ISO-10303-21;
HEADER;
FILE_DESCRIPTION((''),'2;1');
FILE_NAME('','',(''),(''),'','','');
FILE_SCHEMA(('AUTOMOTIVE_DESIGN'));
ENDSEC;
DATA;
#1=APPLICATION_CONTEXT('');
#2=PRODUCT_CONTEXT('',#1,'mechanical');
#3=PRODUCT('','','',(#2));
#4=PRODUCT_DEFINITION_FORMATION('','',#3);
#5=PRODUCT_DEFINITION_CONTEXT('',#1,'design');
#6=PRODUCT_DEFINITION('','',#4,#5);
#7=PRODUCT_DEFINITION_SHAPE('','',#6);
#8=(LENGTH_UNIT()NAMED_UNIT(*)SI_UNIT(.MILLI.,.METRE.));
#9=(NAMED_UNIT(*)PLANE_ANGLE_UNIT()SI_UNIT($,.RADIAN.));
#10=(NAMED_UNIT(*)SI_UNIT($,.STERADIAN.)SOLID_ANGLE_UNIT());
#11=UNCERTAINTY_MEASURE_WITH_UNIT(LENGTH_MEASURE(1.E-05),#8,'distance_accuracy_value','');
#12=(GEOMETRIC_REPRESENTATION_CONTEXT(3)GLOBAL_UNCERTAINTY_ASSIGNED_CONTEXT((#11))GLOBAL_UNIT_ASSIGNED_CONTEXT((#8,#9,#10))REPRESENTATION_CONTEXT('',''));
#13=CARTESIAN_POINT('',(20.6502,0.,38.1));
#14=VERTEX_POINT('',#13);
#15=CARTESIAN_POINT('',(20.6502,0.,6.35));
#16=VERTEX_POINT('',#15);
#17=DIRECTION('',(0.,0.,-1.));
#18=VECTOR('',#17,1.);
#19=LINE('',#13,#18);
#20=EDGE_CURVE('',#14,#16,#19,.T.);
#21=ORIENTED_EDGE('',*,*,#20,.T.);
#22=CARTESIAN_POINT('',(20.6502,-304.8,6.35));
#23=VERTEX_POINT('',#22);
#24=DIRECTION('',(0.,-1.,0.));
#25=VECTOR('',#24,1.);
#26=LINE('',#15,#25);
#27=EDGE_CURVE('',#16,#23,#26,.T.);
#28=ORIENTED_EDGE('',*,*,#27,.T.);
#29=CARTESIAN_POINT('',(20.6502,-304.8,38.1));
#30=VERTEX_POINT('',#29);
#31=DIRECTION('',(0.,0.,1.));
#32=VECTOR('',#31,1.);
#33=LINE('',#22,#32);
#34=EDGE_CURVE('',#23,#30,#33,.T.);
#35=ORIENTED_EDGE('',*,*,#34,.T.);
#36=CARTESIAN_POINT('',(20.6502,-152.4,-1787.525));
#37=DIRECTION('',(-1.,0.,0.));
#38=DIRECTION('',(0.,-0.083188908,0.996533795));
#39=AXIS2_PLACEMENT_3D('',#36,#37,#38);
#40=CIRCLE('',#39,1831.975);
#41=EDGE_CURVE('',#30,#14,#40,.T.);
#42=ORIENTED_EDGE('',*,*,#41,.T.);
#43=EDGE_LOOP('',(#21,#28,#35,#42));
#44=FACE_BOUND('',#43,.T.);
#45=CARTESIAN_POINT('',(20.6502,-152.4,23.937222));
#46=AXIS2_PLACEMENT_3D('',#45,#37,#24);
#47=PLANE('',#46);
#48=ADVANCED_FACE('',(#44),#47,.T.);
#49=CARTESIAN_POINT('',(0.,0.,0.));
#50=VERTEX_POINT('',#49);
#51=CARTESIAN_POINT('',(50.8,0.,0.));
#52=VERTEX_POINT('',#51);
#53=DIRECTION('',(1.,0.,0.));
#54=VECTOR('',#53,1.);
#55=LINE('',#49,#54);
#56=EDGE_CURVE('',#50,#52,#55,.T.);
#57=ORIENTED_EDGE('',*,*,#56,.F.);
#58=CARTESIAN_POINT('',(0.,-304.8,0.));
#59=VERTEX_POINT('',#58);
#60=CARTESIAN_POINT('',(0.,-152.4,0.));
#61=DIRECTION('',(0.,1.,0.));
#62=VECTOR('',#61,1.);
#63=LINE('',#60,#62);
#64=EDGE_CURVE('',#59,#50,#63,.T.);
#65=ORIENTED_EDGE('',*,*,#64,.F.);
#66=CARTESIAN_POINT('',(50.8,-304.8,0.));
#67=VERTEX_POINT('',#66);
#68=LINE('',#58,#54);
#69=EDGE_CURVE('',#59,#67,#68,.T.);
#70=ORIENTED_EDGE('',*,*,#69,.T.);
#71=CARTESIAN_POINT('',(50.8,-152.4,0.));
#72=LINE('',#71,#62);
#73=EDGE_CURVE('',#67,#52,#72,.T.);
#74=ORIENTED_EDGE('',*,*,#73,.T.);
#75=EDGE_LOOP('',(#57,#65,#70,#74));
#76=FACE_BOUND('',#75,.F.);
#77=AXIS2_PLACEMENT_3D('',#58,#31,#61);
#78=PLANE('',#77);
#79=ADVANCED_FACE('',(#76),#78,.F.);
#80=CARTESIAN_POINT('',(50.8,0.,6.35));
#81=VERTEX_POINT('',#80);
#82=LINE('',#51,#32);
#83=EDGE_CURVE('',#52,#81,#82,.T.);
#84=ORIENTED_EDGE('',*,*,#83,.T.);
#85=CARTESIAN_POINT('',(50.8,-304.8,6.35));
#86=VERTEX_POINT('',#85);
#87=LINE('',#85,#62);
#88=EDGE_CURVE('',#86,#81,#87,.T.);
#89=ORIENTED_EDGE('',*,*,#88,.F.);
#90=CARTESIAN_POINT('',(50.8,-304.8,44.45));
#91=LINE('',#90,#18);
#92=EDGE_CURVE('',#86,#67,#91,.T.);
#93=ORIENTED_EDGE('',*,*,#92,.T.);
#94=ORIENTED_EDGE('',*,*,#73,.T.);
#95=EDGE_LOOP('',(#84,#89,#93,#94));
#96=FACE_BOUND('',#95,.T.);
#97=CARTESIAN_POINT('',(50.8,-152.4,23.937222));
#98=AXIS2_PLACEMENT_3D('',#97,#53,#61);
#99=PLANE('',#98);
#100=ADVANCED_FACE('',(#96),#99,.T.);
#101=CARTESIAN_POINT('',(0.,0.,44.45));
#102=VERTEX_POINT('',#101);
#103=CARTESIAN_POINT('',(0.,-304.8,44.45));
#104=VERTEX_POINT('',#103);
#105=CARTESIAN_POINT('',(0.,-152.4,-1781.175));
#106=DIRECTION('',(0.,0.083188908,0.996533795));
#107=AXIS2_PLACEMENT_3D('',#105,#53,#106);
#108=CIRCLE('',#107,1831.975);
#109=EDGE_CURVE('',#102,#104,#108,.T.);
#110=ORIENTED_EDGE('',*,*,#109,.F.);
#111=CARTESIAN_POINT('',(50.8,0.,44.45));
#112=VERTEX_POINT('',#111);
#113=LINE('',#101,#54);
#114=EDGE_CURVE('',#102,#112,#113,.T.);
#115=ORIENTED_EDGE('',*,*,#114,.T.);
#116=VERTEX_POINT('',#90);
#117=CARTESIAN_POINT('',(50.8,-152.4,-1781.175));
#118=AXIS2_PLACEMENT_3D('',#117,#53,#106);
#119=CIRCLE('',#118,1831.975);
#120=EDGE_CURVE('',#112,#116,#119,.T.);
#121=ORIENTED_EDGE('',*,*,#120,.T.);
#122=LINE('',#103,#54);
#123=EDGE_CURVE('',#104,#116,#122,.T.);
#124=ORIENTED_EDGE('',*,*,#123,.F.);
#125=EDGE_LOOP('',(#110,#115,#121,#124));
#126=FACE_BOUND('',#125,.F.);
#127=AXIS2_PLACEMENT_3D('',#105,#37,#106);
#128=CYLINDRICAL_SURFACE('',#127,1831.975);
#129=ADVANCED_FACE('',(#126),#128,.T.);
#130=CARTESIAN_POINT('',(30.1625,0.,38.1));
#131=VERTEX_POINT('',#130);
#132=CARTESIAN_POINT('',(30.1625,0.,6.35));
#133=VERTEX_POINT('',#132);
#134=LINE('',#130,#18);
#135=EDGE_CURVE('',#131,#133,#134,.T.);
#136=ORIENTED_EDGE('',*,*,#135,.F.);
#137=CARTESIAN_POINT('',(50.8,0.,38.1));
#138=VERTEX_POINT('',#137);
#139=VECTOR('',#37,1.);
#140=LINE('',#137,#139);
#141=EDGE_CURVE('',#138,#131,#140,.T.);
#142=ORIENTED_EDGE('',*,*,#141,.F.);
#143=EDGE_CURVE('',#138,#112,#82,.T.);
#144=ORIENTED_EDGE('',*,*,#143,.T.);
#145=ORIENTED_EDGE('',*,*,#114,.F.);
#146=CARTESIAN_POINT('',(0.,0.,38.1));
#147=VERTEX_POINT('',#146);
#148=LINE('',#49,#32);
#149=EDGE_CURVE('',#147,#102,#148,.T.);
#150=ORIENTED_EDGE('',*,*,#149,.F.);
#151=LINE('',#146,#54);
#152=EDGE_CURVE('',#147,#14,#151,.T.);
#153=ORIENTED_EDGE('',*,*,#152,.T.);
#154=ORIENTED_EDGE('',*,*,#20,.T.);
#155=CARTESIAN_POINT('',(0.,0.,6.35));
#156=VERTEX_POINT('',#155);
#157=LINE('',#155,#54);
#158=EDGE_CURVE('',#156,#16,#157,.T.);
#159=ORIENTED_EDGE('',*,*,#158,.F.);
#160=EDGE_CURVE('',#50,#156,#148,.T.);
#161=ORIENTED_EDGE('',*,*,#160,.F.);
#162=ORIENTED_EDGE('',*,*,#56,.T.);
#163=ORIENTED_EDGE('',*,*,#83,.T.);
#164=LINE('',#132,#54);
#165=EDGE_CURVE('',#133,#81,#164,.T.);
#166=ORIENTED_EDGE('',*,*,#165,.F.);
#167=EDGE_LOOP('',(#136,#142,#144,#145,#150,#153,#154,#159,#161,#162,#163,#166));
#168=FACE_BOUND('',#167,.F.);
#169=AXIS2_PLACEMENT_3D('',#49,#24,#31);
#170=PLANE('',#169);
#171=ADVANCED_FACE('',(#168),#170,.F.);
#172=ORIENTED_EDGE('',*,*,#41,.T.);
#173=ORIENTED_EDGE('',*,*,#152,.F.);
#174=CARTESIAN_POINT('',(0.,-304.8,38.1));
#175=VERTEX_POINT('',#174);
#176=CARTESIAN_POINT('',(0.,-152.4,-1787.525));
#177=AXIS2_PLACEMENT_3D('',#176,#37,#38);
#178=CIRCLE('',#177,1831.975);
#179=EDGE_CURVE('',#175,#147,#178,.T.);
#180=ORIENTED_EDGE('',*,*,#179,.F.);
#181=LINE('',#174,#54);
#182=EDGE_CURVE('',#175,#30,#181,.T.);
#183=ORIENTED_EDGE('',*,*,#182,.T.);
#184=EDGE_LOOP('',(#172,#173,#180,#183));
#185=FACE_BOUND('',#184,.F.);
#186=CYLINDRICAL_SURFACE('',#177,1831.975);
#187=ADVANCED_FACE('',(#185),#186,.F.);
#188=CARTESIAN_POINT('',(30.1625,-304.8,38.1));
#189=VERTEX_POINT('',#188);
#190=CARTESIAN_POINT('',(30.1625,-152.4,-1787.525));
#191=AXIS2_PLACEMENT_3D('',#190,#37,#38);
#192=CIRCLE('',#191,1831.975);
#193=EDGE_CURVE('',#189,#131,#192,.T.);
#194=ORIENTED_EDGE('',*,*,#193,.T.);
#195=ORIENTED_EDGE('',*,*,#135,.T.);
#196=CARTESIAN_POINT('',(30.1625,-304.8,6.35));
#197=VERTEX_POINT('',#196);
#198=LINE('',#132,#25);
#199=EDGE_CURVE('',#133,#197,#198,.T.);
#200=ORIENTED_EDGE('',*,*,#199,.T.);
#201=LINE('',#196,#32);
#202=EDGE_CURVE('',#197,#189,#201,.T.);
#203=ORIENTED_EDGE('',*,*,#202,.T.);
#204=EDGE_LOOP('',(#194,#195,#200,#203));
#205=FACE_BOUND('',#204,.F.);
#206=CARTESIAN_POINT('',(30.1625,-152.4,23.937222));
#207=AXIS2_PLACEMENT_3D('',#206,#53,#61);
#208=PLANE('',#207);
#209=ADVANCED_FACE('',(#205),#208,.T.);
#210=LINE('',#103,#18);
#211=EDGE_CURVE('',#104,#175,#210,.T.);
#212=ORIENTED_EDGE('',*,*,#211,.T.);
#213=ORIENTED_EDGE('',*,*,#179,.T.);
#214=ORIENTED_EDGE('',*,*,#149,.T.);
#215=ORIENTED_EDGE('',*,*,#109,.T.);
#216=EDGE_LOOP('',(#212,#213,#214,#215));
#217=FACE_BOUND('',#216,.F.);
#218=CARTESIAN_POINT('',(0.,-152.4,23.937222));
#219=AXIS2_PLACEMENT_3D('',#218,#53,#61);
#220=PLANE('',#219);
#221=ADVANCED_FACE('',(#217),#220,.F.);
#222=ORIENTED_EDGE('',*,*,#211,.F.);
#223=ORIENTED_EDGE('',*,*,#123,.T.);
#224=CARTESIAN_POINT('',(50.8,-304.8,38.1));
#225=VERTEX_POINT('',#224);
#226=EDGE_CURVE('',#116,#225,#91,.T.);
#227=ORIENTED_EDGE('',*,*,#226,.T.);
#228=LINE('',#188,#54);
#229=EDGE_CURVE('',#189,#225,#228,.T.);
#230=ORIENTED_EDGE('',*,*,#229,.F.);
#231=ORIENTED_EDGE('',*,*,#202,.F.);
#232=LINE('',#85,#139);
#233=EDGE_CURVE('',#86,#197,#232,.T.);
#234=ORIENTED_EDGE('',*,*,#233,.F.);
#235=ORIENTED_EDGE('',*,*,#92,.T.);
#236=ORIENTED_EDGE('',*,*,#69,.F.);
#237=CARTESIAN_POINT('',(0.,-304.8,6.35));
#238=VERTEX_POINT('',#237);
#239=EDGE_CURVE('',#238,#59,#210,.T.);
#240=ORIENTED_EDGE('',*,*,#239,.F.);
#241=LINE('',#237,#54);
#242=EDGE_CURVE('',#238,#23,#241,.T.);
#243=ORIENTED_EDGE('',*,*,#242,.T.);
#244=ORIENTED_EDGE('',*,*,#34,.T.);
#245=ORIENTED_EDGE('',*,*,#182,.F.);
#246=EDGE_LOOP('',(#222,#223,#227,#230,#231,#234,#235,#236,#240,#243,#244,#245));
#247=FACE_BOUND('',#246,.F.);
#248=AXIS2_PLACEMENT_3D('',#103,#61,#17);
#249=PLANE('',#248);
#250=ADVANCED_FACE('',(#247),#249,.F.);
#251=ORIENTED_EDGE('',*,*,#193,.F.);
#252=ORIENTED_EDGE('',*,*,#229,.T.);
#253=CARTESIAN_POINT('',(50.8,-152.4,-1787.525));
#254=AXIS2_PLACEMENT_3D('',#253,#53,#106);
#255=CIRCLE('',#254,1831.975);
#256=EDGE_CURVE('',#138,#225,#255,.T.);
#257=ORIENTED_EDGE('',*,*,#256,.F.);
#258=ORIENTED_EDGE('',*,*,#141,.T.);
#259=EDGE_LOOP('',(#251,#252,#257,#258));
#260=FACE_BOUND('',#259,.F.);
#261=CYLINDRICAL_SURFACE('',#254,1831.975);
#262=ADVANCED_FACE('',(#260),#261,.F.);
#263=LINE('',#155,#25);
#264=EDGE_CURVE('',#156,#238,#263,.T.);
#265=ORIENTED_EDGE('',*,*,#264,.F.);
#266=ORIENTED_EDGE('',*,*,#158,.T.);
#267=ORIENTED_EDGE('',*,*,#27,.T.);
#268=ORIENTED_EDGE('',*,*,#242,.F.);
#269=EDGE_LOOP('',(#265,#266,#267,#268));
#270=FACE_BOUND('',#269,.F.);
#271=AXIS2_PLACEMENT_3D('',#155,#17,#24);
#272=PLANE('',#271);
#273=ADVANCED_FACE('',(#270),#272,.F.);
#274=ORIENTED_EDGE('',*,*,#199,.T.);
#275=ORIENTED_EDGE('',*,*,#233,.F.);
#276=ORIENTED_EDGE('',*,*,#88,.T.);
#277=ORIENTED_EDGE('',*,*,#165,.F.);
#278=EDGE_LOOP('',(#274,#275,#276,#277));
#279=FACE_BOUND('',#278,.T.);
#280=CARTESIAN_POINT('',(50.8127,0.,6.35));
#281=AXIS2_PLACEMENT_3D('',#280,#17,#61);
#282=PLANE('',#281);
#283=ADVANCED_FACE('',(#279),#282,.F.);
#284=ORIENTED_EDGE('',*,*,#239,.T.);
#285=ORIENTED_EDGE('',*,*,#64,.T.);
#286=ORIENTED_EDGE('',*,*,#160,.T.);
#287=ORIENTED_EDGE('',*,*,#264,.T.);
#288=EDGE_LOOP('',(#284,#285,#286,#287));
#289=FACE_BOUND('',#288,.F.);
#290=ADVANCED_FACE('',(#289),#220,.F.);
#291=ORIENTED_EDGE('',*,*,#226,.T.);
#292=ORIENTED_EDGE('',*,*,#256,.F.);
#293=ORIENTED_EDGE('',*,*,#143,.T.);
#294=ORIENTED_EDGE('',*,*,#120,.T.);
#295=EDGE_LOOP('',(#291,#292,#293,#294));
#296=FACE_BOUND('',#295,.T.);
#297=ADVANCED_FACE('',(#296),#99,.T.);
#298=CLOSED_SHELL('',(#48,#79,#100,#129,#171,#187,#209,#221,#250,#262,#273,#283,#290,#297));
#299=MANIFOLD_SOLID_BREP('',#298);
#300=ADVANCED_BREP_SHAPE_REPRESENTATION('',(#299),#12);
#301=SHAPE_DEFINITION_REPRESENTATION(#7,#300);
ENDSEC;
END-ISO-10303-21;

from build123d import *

# Parameters (mm, degrees)
F0_W     = 304.8
F0_H     = 6.35
F1_DEPTH = 50.8
F3_DEPTH = 0.8125
F5_DEPTH = 20.6502


# Not quite as in the source:
# - a pattern or mirror of a feature is missing from the dataset's text; its kind, count and spacing are read off the source's solid


with BuildPart() as f1:
    # F0 (on Right) → F1 (new body)
    with BuildSketch(Plane.YZ):
        with BuildLine():
            Line((-304.8, 6.35), (0, 6.35))
            Line((0, 6.35), (0, 38.1))
            ThreePointArc((0, 38.1), (-152.4, 44.45), (-304.8, 38.1))
            Line((-304.8, 38.1), (-304.8, 6.35))
        make_face()
        with BuildLine():
            ThreePointArc((-304.8, 38.1), (-152.4, 44.45), (0, 38.1))
            Line((0, 38.1), (0, 44.45))
            ThreePointArc((0, 44.45), (-152.4, 50.8), (-304.8, 44.45))
            Line((-304.8, 44.45), (-304.8, 38.1))
        make_face()
        with Locations((-152.4, 3.175)):
            Rectangle(F0_W, F0_H)
    extrude(amount=F1_DEPTH)

    # F2 (on face) → F3 (cut)
    with BuildSketch(Plane.YZ.offset(50.8)):
        with BuildLine():
            Line((0, 6.35), (0, 38.1))
            ThreePointArc((0, 38.1), (-152.4, 44.45), (-304.8, 38.1))
            Line((-304.8, 38.1), (-304.8, 6.35))
            Line((-304.8, 6.35), (0, 6.35))
        make_face()
    extrude(amount=-F3_DEPTH, mode=Mode.SUBTRACT)

    # F4 (on face) → F5 (cut)
    with BuildSketch(Plane(origin=(0, 0, 0), x_dir=(0, -1, 0), z_dir=(-1, 0, 0))):
        with BuildLine():
            Line((304.8, 6.35), (304.8, 38.1))
            ThreePointArc((304.8, 38.1), (152.4, 44.45), (0, 38.1))
            Line((0, 38.1), (0, 6.35))
            Line((0, 6.35), (304.8, 6.35))
        make_face()
    f5 = extrude(amount=-F5_DEPTH, mode=Mode.SUBTRACT)

    # F5_copies: F5 across plane
    add(f5.mirror(Plane(origin=(25.40635, 0, 0), x_dir=(0, 0, 1), z_dir=(1, 0, 0))), mode=Mode.SUBTRACT)


solid = f1.part
